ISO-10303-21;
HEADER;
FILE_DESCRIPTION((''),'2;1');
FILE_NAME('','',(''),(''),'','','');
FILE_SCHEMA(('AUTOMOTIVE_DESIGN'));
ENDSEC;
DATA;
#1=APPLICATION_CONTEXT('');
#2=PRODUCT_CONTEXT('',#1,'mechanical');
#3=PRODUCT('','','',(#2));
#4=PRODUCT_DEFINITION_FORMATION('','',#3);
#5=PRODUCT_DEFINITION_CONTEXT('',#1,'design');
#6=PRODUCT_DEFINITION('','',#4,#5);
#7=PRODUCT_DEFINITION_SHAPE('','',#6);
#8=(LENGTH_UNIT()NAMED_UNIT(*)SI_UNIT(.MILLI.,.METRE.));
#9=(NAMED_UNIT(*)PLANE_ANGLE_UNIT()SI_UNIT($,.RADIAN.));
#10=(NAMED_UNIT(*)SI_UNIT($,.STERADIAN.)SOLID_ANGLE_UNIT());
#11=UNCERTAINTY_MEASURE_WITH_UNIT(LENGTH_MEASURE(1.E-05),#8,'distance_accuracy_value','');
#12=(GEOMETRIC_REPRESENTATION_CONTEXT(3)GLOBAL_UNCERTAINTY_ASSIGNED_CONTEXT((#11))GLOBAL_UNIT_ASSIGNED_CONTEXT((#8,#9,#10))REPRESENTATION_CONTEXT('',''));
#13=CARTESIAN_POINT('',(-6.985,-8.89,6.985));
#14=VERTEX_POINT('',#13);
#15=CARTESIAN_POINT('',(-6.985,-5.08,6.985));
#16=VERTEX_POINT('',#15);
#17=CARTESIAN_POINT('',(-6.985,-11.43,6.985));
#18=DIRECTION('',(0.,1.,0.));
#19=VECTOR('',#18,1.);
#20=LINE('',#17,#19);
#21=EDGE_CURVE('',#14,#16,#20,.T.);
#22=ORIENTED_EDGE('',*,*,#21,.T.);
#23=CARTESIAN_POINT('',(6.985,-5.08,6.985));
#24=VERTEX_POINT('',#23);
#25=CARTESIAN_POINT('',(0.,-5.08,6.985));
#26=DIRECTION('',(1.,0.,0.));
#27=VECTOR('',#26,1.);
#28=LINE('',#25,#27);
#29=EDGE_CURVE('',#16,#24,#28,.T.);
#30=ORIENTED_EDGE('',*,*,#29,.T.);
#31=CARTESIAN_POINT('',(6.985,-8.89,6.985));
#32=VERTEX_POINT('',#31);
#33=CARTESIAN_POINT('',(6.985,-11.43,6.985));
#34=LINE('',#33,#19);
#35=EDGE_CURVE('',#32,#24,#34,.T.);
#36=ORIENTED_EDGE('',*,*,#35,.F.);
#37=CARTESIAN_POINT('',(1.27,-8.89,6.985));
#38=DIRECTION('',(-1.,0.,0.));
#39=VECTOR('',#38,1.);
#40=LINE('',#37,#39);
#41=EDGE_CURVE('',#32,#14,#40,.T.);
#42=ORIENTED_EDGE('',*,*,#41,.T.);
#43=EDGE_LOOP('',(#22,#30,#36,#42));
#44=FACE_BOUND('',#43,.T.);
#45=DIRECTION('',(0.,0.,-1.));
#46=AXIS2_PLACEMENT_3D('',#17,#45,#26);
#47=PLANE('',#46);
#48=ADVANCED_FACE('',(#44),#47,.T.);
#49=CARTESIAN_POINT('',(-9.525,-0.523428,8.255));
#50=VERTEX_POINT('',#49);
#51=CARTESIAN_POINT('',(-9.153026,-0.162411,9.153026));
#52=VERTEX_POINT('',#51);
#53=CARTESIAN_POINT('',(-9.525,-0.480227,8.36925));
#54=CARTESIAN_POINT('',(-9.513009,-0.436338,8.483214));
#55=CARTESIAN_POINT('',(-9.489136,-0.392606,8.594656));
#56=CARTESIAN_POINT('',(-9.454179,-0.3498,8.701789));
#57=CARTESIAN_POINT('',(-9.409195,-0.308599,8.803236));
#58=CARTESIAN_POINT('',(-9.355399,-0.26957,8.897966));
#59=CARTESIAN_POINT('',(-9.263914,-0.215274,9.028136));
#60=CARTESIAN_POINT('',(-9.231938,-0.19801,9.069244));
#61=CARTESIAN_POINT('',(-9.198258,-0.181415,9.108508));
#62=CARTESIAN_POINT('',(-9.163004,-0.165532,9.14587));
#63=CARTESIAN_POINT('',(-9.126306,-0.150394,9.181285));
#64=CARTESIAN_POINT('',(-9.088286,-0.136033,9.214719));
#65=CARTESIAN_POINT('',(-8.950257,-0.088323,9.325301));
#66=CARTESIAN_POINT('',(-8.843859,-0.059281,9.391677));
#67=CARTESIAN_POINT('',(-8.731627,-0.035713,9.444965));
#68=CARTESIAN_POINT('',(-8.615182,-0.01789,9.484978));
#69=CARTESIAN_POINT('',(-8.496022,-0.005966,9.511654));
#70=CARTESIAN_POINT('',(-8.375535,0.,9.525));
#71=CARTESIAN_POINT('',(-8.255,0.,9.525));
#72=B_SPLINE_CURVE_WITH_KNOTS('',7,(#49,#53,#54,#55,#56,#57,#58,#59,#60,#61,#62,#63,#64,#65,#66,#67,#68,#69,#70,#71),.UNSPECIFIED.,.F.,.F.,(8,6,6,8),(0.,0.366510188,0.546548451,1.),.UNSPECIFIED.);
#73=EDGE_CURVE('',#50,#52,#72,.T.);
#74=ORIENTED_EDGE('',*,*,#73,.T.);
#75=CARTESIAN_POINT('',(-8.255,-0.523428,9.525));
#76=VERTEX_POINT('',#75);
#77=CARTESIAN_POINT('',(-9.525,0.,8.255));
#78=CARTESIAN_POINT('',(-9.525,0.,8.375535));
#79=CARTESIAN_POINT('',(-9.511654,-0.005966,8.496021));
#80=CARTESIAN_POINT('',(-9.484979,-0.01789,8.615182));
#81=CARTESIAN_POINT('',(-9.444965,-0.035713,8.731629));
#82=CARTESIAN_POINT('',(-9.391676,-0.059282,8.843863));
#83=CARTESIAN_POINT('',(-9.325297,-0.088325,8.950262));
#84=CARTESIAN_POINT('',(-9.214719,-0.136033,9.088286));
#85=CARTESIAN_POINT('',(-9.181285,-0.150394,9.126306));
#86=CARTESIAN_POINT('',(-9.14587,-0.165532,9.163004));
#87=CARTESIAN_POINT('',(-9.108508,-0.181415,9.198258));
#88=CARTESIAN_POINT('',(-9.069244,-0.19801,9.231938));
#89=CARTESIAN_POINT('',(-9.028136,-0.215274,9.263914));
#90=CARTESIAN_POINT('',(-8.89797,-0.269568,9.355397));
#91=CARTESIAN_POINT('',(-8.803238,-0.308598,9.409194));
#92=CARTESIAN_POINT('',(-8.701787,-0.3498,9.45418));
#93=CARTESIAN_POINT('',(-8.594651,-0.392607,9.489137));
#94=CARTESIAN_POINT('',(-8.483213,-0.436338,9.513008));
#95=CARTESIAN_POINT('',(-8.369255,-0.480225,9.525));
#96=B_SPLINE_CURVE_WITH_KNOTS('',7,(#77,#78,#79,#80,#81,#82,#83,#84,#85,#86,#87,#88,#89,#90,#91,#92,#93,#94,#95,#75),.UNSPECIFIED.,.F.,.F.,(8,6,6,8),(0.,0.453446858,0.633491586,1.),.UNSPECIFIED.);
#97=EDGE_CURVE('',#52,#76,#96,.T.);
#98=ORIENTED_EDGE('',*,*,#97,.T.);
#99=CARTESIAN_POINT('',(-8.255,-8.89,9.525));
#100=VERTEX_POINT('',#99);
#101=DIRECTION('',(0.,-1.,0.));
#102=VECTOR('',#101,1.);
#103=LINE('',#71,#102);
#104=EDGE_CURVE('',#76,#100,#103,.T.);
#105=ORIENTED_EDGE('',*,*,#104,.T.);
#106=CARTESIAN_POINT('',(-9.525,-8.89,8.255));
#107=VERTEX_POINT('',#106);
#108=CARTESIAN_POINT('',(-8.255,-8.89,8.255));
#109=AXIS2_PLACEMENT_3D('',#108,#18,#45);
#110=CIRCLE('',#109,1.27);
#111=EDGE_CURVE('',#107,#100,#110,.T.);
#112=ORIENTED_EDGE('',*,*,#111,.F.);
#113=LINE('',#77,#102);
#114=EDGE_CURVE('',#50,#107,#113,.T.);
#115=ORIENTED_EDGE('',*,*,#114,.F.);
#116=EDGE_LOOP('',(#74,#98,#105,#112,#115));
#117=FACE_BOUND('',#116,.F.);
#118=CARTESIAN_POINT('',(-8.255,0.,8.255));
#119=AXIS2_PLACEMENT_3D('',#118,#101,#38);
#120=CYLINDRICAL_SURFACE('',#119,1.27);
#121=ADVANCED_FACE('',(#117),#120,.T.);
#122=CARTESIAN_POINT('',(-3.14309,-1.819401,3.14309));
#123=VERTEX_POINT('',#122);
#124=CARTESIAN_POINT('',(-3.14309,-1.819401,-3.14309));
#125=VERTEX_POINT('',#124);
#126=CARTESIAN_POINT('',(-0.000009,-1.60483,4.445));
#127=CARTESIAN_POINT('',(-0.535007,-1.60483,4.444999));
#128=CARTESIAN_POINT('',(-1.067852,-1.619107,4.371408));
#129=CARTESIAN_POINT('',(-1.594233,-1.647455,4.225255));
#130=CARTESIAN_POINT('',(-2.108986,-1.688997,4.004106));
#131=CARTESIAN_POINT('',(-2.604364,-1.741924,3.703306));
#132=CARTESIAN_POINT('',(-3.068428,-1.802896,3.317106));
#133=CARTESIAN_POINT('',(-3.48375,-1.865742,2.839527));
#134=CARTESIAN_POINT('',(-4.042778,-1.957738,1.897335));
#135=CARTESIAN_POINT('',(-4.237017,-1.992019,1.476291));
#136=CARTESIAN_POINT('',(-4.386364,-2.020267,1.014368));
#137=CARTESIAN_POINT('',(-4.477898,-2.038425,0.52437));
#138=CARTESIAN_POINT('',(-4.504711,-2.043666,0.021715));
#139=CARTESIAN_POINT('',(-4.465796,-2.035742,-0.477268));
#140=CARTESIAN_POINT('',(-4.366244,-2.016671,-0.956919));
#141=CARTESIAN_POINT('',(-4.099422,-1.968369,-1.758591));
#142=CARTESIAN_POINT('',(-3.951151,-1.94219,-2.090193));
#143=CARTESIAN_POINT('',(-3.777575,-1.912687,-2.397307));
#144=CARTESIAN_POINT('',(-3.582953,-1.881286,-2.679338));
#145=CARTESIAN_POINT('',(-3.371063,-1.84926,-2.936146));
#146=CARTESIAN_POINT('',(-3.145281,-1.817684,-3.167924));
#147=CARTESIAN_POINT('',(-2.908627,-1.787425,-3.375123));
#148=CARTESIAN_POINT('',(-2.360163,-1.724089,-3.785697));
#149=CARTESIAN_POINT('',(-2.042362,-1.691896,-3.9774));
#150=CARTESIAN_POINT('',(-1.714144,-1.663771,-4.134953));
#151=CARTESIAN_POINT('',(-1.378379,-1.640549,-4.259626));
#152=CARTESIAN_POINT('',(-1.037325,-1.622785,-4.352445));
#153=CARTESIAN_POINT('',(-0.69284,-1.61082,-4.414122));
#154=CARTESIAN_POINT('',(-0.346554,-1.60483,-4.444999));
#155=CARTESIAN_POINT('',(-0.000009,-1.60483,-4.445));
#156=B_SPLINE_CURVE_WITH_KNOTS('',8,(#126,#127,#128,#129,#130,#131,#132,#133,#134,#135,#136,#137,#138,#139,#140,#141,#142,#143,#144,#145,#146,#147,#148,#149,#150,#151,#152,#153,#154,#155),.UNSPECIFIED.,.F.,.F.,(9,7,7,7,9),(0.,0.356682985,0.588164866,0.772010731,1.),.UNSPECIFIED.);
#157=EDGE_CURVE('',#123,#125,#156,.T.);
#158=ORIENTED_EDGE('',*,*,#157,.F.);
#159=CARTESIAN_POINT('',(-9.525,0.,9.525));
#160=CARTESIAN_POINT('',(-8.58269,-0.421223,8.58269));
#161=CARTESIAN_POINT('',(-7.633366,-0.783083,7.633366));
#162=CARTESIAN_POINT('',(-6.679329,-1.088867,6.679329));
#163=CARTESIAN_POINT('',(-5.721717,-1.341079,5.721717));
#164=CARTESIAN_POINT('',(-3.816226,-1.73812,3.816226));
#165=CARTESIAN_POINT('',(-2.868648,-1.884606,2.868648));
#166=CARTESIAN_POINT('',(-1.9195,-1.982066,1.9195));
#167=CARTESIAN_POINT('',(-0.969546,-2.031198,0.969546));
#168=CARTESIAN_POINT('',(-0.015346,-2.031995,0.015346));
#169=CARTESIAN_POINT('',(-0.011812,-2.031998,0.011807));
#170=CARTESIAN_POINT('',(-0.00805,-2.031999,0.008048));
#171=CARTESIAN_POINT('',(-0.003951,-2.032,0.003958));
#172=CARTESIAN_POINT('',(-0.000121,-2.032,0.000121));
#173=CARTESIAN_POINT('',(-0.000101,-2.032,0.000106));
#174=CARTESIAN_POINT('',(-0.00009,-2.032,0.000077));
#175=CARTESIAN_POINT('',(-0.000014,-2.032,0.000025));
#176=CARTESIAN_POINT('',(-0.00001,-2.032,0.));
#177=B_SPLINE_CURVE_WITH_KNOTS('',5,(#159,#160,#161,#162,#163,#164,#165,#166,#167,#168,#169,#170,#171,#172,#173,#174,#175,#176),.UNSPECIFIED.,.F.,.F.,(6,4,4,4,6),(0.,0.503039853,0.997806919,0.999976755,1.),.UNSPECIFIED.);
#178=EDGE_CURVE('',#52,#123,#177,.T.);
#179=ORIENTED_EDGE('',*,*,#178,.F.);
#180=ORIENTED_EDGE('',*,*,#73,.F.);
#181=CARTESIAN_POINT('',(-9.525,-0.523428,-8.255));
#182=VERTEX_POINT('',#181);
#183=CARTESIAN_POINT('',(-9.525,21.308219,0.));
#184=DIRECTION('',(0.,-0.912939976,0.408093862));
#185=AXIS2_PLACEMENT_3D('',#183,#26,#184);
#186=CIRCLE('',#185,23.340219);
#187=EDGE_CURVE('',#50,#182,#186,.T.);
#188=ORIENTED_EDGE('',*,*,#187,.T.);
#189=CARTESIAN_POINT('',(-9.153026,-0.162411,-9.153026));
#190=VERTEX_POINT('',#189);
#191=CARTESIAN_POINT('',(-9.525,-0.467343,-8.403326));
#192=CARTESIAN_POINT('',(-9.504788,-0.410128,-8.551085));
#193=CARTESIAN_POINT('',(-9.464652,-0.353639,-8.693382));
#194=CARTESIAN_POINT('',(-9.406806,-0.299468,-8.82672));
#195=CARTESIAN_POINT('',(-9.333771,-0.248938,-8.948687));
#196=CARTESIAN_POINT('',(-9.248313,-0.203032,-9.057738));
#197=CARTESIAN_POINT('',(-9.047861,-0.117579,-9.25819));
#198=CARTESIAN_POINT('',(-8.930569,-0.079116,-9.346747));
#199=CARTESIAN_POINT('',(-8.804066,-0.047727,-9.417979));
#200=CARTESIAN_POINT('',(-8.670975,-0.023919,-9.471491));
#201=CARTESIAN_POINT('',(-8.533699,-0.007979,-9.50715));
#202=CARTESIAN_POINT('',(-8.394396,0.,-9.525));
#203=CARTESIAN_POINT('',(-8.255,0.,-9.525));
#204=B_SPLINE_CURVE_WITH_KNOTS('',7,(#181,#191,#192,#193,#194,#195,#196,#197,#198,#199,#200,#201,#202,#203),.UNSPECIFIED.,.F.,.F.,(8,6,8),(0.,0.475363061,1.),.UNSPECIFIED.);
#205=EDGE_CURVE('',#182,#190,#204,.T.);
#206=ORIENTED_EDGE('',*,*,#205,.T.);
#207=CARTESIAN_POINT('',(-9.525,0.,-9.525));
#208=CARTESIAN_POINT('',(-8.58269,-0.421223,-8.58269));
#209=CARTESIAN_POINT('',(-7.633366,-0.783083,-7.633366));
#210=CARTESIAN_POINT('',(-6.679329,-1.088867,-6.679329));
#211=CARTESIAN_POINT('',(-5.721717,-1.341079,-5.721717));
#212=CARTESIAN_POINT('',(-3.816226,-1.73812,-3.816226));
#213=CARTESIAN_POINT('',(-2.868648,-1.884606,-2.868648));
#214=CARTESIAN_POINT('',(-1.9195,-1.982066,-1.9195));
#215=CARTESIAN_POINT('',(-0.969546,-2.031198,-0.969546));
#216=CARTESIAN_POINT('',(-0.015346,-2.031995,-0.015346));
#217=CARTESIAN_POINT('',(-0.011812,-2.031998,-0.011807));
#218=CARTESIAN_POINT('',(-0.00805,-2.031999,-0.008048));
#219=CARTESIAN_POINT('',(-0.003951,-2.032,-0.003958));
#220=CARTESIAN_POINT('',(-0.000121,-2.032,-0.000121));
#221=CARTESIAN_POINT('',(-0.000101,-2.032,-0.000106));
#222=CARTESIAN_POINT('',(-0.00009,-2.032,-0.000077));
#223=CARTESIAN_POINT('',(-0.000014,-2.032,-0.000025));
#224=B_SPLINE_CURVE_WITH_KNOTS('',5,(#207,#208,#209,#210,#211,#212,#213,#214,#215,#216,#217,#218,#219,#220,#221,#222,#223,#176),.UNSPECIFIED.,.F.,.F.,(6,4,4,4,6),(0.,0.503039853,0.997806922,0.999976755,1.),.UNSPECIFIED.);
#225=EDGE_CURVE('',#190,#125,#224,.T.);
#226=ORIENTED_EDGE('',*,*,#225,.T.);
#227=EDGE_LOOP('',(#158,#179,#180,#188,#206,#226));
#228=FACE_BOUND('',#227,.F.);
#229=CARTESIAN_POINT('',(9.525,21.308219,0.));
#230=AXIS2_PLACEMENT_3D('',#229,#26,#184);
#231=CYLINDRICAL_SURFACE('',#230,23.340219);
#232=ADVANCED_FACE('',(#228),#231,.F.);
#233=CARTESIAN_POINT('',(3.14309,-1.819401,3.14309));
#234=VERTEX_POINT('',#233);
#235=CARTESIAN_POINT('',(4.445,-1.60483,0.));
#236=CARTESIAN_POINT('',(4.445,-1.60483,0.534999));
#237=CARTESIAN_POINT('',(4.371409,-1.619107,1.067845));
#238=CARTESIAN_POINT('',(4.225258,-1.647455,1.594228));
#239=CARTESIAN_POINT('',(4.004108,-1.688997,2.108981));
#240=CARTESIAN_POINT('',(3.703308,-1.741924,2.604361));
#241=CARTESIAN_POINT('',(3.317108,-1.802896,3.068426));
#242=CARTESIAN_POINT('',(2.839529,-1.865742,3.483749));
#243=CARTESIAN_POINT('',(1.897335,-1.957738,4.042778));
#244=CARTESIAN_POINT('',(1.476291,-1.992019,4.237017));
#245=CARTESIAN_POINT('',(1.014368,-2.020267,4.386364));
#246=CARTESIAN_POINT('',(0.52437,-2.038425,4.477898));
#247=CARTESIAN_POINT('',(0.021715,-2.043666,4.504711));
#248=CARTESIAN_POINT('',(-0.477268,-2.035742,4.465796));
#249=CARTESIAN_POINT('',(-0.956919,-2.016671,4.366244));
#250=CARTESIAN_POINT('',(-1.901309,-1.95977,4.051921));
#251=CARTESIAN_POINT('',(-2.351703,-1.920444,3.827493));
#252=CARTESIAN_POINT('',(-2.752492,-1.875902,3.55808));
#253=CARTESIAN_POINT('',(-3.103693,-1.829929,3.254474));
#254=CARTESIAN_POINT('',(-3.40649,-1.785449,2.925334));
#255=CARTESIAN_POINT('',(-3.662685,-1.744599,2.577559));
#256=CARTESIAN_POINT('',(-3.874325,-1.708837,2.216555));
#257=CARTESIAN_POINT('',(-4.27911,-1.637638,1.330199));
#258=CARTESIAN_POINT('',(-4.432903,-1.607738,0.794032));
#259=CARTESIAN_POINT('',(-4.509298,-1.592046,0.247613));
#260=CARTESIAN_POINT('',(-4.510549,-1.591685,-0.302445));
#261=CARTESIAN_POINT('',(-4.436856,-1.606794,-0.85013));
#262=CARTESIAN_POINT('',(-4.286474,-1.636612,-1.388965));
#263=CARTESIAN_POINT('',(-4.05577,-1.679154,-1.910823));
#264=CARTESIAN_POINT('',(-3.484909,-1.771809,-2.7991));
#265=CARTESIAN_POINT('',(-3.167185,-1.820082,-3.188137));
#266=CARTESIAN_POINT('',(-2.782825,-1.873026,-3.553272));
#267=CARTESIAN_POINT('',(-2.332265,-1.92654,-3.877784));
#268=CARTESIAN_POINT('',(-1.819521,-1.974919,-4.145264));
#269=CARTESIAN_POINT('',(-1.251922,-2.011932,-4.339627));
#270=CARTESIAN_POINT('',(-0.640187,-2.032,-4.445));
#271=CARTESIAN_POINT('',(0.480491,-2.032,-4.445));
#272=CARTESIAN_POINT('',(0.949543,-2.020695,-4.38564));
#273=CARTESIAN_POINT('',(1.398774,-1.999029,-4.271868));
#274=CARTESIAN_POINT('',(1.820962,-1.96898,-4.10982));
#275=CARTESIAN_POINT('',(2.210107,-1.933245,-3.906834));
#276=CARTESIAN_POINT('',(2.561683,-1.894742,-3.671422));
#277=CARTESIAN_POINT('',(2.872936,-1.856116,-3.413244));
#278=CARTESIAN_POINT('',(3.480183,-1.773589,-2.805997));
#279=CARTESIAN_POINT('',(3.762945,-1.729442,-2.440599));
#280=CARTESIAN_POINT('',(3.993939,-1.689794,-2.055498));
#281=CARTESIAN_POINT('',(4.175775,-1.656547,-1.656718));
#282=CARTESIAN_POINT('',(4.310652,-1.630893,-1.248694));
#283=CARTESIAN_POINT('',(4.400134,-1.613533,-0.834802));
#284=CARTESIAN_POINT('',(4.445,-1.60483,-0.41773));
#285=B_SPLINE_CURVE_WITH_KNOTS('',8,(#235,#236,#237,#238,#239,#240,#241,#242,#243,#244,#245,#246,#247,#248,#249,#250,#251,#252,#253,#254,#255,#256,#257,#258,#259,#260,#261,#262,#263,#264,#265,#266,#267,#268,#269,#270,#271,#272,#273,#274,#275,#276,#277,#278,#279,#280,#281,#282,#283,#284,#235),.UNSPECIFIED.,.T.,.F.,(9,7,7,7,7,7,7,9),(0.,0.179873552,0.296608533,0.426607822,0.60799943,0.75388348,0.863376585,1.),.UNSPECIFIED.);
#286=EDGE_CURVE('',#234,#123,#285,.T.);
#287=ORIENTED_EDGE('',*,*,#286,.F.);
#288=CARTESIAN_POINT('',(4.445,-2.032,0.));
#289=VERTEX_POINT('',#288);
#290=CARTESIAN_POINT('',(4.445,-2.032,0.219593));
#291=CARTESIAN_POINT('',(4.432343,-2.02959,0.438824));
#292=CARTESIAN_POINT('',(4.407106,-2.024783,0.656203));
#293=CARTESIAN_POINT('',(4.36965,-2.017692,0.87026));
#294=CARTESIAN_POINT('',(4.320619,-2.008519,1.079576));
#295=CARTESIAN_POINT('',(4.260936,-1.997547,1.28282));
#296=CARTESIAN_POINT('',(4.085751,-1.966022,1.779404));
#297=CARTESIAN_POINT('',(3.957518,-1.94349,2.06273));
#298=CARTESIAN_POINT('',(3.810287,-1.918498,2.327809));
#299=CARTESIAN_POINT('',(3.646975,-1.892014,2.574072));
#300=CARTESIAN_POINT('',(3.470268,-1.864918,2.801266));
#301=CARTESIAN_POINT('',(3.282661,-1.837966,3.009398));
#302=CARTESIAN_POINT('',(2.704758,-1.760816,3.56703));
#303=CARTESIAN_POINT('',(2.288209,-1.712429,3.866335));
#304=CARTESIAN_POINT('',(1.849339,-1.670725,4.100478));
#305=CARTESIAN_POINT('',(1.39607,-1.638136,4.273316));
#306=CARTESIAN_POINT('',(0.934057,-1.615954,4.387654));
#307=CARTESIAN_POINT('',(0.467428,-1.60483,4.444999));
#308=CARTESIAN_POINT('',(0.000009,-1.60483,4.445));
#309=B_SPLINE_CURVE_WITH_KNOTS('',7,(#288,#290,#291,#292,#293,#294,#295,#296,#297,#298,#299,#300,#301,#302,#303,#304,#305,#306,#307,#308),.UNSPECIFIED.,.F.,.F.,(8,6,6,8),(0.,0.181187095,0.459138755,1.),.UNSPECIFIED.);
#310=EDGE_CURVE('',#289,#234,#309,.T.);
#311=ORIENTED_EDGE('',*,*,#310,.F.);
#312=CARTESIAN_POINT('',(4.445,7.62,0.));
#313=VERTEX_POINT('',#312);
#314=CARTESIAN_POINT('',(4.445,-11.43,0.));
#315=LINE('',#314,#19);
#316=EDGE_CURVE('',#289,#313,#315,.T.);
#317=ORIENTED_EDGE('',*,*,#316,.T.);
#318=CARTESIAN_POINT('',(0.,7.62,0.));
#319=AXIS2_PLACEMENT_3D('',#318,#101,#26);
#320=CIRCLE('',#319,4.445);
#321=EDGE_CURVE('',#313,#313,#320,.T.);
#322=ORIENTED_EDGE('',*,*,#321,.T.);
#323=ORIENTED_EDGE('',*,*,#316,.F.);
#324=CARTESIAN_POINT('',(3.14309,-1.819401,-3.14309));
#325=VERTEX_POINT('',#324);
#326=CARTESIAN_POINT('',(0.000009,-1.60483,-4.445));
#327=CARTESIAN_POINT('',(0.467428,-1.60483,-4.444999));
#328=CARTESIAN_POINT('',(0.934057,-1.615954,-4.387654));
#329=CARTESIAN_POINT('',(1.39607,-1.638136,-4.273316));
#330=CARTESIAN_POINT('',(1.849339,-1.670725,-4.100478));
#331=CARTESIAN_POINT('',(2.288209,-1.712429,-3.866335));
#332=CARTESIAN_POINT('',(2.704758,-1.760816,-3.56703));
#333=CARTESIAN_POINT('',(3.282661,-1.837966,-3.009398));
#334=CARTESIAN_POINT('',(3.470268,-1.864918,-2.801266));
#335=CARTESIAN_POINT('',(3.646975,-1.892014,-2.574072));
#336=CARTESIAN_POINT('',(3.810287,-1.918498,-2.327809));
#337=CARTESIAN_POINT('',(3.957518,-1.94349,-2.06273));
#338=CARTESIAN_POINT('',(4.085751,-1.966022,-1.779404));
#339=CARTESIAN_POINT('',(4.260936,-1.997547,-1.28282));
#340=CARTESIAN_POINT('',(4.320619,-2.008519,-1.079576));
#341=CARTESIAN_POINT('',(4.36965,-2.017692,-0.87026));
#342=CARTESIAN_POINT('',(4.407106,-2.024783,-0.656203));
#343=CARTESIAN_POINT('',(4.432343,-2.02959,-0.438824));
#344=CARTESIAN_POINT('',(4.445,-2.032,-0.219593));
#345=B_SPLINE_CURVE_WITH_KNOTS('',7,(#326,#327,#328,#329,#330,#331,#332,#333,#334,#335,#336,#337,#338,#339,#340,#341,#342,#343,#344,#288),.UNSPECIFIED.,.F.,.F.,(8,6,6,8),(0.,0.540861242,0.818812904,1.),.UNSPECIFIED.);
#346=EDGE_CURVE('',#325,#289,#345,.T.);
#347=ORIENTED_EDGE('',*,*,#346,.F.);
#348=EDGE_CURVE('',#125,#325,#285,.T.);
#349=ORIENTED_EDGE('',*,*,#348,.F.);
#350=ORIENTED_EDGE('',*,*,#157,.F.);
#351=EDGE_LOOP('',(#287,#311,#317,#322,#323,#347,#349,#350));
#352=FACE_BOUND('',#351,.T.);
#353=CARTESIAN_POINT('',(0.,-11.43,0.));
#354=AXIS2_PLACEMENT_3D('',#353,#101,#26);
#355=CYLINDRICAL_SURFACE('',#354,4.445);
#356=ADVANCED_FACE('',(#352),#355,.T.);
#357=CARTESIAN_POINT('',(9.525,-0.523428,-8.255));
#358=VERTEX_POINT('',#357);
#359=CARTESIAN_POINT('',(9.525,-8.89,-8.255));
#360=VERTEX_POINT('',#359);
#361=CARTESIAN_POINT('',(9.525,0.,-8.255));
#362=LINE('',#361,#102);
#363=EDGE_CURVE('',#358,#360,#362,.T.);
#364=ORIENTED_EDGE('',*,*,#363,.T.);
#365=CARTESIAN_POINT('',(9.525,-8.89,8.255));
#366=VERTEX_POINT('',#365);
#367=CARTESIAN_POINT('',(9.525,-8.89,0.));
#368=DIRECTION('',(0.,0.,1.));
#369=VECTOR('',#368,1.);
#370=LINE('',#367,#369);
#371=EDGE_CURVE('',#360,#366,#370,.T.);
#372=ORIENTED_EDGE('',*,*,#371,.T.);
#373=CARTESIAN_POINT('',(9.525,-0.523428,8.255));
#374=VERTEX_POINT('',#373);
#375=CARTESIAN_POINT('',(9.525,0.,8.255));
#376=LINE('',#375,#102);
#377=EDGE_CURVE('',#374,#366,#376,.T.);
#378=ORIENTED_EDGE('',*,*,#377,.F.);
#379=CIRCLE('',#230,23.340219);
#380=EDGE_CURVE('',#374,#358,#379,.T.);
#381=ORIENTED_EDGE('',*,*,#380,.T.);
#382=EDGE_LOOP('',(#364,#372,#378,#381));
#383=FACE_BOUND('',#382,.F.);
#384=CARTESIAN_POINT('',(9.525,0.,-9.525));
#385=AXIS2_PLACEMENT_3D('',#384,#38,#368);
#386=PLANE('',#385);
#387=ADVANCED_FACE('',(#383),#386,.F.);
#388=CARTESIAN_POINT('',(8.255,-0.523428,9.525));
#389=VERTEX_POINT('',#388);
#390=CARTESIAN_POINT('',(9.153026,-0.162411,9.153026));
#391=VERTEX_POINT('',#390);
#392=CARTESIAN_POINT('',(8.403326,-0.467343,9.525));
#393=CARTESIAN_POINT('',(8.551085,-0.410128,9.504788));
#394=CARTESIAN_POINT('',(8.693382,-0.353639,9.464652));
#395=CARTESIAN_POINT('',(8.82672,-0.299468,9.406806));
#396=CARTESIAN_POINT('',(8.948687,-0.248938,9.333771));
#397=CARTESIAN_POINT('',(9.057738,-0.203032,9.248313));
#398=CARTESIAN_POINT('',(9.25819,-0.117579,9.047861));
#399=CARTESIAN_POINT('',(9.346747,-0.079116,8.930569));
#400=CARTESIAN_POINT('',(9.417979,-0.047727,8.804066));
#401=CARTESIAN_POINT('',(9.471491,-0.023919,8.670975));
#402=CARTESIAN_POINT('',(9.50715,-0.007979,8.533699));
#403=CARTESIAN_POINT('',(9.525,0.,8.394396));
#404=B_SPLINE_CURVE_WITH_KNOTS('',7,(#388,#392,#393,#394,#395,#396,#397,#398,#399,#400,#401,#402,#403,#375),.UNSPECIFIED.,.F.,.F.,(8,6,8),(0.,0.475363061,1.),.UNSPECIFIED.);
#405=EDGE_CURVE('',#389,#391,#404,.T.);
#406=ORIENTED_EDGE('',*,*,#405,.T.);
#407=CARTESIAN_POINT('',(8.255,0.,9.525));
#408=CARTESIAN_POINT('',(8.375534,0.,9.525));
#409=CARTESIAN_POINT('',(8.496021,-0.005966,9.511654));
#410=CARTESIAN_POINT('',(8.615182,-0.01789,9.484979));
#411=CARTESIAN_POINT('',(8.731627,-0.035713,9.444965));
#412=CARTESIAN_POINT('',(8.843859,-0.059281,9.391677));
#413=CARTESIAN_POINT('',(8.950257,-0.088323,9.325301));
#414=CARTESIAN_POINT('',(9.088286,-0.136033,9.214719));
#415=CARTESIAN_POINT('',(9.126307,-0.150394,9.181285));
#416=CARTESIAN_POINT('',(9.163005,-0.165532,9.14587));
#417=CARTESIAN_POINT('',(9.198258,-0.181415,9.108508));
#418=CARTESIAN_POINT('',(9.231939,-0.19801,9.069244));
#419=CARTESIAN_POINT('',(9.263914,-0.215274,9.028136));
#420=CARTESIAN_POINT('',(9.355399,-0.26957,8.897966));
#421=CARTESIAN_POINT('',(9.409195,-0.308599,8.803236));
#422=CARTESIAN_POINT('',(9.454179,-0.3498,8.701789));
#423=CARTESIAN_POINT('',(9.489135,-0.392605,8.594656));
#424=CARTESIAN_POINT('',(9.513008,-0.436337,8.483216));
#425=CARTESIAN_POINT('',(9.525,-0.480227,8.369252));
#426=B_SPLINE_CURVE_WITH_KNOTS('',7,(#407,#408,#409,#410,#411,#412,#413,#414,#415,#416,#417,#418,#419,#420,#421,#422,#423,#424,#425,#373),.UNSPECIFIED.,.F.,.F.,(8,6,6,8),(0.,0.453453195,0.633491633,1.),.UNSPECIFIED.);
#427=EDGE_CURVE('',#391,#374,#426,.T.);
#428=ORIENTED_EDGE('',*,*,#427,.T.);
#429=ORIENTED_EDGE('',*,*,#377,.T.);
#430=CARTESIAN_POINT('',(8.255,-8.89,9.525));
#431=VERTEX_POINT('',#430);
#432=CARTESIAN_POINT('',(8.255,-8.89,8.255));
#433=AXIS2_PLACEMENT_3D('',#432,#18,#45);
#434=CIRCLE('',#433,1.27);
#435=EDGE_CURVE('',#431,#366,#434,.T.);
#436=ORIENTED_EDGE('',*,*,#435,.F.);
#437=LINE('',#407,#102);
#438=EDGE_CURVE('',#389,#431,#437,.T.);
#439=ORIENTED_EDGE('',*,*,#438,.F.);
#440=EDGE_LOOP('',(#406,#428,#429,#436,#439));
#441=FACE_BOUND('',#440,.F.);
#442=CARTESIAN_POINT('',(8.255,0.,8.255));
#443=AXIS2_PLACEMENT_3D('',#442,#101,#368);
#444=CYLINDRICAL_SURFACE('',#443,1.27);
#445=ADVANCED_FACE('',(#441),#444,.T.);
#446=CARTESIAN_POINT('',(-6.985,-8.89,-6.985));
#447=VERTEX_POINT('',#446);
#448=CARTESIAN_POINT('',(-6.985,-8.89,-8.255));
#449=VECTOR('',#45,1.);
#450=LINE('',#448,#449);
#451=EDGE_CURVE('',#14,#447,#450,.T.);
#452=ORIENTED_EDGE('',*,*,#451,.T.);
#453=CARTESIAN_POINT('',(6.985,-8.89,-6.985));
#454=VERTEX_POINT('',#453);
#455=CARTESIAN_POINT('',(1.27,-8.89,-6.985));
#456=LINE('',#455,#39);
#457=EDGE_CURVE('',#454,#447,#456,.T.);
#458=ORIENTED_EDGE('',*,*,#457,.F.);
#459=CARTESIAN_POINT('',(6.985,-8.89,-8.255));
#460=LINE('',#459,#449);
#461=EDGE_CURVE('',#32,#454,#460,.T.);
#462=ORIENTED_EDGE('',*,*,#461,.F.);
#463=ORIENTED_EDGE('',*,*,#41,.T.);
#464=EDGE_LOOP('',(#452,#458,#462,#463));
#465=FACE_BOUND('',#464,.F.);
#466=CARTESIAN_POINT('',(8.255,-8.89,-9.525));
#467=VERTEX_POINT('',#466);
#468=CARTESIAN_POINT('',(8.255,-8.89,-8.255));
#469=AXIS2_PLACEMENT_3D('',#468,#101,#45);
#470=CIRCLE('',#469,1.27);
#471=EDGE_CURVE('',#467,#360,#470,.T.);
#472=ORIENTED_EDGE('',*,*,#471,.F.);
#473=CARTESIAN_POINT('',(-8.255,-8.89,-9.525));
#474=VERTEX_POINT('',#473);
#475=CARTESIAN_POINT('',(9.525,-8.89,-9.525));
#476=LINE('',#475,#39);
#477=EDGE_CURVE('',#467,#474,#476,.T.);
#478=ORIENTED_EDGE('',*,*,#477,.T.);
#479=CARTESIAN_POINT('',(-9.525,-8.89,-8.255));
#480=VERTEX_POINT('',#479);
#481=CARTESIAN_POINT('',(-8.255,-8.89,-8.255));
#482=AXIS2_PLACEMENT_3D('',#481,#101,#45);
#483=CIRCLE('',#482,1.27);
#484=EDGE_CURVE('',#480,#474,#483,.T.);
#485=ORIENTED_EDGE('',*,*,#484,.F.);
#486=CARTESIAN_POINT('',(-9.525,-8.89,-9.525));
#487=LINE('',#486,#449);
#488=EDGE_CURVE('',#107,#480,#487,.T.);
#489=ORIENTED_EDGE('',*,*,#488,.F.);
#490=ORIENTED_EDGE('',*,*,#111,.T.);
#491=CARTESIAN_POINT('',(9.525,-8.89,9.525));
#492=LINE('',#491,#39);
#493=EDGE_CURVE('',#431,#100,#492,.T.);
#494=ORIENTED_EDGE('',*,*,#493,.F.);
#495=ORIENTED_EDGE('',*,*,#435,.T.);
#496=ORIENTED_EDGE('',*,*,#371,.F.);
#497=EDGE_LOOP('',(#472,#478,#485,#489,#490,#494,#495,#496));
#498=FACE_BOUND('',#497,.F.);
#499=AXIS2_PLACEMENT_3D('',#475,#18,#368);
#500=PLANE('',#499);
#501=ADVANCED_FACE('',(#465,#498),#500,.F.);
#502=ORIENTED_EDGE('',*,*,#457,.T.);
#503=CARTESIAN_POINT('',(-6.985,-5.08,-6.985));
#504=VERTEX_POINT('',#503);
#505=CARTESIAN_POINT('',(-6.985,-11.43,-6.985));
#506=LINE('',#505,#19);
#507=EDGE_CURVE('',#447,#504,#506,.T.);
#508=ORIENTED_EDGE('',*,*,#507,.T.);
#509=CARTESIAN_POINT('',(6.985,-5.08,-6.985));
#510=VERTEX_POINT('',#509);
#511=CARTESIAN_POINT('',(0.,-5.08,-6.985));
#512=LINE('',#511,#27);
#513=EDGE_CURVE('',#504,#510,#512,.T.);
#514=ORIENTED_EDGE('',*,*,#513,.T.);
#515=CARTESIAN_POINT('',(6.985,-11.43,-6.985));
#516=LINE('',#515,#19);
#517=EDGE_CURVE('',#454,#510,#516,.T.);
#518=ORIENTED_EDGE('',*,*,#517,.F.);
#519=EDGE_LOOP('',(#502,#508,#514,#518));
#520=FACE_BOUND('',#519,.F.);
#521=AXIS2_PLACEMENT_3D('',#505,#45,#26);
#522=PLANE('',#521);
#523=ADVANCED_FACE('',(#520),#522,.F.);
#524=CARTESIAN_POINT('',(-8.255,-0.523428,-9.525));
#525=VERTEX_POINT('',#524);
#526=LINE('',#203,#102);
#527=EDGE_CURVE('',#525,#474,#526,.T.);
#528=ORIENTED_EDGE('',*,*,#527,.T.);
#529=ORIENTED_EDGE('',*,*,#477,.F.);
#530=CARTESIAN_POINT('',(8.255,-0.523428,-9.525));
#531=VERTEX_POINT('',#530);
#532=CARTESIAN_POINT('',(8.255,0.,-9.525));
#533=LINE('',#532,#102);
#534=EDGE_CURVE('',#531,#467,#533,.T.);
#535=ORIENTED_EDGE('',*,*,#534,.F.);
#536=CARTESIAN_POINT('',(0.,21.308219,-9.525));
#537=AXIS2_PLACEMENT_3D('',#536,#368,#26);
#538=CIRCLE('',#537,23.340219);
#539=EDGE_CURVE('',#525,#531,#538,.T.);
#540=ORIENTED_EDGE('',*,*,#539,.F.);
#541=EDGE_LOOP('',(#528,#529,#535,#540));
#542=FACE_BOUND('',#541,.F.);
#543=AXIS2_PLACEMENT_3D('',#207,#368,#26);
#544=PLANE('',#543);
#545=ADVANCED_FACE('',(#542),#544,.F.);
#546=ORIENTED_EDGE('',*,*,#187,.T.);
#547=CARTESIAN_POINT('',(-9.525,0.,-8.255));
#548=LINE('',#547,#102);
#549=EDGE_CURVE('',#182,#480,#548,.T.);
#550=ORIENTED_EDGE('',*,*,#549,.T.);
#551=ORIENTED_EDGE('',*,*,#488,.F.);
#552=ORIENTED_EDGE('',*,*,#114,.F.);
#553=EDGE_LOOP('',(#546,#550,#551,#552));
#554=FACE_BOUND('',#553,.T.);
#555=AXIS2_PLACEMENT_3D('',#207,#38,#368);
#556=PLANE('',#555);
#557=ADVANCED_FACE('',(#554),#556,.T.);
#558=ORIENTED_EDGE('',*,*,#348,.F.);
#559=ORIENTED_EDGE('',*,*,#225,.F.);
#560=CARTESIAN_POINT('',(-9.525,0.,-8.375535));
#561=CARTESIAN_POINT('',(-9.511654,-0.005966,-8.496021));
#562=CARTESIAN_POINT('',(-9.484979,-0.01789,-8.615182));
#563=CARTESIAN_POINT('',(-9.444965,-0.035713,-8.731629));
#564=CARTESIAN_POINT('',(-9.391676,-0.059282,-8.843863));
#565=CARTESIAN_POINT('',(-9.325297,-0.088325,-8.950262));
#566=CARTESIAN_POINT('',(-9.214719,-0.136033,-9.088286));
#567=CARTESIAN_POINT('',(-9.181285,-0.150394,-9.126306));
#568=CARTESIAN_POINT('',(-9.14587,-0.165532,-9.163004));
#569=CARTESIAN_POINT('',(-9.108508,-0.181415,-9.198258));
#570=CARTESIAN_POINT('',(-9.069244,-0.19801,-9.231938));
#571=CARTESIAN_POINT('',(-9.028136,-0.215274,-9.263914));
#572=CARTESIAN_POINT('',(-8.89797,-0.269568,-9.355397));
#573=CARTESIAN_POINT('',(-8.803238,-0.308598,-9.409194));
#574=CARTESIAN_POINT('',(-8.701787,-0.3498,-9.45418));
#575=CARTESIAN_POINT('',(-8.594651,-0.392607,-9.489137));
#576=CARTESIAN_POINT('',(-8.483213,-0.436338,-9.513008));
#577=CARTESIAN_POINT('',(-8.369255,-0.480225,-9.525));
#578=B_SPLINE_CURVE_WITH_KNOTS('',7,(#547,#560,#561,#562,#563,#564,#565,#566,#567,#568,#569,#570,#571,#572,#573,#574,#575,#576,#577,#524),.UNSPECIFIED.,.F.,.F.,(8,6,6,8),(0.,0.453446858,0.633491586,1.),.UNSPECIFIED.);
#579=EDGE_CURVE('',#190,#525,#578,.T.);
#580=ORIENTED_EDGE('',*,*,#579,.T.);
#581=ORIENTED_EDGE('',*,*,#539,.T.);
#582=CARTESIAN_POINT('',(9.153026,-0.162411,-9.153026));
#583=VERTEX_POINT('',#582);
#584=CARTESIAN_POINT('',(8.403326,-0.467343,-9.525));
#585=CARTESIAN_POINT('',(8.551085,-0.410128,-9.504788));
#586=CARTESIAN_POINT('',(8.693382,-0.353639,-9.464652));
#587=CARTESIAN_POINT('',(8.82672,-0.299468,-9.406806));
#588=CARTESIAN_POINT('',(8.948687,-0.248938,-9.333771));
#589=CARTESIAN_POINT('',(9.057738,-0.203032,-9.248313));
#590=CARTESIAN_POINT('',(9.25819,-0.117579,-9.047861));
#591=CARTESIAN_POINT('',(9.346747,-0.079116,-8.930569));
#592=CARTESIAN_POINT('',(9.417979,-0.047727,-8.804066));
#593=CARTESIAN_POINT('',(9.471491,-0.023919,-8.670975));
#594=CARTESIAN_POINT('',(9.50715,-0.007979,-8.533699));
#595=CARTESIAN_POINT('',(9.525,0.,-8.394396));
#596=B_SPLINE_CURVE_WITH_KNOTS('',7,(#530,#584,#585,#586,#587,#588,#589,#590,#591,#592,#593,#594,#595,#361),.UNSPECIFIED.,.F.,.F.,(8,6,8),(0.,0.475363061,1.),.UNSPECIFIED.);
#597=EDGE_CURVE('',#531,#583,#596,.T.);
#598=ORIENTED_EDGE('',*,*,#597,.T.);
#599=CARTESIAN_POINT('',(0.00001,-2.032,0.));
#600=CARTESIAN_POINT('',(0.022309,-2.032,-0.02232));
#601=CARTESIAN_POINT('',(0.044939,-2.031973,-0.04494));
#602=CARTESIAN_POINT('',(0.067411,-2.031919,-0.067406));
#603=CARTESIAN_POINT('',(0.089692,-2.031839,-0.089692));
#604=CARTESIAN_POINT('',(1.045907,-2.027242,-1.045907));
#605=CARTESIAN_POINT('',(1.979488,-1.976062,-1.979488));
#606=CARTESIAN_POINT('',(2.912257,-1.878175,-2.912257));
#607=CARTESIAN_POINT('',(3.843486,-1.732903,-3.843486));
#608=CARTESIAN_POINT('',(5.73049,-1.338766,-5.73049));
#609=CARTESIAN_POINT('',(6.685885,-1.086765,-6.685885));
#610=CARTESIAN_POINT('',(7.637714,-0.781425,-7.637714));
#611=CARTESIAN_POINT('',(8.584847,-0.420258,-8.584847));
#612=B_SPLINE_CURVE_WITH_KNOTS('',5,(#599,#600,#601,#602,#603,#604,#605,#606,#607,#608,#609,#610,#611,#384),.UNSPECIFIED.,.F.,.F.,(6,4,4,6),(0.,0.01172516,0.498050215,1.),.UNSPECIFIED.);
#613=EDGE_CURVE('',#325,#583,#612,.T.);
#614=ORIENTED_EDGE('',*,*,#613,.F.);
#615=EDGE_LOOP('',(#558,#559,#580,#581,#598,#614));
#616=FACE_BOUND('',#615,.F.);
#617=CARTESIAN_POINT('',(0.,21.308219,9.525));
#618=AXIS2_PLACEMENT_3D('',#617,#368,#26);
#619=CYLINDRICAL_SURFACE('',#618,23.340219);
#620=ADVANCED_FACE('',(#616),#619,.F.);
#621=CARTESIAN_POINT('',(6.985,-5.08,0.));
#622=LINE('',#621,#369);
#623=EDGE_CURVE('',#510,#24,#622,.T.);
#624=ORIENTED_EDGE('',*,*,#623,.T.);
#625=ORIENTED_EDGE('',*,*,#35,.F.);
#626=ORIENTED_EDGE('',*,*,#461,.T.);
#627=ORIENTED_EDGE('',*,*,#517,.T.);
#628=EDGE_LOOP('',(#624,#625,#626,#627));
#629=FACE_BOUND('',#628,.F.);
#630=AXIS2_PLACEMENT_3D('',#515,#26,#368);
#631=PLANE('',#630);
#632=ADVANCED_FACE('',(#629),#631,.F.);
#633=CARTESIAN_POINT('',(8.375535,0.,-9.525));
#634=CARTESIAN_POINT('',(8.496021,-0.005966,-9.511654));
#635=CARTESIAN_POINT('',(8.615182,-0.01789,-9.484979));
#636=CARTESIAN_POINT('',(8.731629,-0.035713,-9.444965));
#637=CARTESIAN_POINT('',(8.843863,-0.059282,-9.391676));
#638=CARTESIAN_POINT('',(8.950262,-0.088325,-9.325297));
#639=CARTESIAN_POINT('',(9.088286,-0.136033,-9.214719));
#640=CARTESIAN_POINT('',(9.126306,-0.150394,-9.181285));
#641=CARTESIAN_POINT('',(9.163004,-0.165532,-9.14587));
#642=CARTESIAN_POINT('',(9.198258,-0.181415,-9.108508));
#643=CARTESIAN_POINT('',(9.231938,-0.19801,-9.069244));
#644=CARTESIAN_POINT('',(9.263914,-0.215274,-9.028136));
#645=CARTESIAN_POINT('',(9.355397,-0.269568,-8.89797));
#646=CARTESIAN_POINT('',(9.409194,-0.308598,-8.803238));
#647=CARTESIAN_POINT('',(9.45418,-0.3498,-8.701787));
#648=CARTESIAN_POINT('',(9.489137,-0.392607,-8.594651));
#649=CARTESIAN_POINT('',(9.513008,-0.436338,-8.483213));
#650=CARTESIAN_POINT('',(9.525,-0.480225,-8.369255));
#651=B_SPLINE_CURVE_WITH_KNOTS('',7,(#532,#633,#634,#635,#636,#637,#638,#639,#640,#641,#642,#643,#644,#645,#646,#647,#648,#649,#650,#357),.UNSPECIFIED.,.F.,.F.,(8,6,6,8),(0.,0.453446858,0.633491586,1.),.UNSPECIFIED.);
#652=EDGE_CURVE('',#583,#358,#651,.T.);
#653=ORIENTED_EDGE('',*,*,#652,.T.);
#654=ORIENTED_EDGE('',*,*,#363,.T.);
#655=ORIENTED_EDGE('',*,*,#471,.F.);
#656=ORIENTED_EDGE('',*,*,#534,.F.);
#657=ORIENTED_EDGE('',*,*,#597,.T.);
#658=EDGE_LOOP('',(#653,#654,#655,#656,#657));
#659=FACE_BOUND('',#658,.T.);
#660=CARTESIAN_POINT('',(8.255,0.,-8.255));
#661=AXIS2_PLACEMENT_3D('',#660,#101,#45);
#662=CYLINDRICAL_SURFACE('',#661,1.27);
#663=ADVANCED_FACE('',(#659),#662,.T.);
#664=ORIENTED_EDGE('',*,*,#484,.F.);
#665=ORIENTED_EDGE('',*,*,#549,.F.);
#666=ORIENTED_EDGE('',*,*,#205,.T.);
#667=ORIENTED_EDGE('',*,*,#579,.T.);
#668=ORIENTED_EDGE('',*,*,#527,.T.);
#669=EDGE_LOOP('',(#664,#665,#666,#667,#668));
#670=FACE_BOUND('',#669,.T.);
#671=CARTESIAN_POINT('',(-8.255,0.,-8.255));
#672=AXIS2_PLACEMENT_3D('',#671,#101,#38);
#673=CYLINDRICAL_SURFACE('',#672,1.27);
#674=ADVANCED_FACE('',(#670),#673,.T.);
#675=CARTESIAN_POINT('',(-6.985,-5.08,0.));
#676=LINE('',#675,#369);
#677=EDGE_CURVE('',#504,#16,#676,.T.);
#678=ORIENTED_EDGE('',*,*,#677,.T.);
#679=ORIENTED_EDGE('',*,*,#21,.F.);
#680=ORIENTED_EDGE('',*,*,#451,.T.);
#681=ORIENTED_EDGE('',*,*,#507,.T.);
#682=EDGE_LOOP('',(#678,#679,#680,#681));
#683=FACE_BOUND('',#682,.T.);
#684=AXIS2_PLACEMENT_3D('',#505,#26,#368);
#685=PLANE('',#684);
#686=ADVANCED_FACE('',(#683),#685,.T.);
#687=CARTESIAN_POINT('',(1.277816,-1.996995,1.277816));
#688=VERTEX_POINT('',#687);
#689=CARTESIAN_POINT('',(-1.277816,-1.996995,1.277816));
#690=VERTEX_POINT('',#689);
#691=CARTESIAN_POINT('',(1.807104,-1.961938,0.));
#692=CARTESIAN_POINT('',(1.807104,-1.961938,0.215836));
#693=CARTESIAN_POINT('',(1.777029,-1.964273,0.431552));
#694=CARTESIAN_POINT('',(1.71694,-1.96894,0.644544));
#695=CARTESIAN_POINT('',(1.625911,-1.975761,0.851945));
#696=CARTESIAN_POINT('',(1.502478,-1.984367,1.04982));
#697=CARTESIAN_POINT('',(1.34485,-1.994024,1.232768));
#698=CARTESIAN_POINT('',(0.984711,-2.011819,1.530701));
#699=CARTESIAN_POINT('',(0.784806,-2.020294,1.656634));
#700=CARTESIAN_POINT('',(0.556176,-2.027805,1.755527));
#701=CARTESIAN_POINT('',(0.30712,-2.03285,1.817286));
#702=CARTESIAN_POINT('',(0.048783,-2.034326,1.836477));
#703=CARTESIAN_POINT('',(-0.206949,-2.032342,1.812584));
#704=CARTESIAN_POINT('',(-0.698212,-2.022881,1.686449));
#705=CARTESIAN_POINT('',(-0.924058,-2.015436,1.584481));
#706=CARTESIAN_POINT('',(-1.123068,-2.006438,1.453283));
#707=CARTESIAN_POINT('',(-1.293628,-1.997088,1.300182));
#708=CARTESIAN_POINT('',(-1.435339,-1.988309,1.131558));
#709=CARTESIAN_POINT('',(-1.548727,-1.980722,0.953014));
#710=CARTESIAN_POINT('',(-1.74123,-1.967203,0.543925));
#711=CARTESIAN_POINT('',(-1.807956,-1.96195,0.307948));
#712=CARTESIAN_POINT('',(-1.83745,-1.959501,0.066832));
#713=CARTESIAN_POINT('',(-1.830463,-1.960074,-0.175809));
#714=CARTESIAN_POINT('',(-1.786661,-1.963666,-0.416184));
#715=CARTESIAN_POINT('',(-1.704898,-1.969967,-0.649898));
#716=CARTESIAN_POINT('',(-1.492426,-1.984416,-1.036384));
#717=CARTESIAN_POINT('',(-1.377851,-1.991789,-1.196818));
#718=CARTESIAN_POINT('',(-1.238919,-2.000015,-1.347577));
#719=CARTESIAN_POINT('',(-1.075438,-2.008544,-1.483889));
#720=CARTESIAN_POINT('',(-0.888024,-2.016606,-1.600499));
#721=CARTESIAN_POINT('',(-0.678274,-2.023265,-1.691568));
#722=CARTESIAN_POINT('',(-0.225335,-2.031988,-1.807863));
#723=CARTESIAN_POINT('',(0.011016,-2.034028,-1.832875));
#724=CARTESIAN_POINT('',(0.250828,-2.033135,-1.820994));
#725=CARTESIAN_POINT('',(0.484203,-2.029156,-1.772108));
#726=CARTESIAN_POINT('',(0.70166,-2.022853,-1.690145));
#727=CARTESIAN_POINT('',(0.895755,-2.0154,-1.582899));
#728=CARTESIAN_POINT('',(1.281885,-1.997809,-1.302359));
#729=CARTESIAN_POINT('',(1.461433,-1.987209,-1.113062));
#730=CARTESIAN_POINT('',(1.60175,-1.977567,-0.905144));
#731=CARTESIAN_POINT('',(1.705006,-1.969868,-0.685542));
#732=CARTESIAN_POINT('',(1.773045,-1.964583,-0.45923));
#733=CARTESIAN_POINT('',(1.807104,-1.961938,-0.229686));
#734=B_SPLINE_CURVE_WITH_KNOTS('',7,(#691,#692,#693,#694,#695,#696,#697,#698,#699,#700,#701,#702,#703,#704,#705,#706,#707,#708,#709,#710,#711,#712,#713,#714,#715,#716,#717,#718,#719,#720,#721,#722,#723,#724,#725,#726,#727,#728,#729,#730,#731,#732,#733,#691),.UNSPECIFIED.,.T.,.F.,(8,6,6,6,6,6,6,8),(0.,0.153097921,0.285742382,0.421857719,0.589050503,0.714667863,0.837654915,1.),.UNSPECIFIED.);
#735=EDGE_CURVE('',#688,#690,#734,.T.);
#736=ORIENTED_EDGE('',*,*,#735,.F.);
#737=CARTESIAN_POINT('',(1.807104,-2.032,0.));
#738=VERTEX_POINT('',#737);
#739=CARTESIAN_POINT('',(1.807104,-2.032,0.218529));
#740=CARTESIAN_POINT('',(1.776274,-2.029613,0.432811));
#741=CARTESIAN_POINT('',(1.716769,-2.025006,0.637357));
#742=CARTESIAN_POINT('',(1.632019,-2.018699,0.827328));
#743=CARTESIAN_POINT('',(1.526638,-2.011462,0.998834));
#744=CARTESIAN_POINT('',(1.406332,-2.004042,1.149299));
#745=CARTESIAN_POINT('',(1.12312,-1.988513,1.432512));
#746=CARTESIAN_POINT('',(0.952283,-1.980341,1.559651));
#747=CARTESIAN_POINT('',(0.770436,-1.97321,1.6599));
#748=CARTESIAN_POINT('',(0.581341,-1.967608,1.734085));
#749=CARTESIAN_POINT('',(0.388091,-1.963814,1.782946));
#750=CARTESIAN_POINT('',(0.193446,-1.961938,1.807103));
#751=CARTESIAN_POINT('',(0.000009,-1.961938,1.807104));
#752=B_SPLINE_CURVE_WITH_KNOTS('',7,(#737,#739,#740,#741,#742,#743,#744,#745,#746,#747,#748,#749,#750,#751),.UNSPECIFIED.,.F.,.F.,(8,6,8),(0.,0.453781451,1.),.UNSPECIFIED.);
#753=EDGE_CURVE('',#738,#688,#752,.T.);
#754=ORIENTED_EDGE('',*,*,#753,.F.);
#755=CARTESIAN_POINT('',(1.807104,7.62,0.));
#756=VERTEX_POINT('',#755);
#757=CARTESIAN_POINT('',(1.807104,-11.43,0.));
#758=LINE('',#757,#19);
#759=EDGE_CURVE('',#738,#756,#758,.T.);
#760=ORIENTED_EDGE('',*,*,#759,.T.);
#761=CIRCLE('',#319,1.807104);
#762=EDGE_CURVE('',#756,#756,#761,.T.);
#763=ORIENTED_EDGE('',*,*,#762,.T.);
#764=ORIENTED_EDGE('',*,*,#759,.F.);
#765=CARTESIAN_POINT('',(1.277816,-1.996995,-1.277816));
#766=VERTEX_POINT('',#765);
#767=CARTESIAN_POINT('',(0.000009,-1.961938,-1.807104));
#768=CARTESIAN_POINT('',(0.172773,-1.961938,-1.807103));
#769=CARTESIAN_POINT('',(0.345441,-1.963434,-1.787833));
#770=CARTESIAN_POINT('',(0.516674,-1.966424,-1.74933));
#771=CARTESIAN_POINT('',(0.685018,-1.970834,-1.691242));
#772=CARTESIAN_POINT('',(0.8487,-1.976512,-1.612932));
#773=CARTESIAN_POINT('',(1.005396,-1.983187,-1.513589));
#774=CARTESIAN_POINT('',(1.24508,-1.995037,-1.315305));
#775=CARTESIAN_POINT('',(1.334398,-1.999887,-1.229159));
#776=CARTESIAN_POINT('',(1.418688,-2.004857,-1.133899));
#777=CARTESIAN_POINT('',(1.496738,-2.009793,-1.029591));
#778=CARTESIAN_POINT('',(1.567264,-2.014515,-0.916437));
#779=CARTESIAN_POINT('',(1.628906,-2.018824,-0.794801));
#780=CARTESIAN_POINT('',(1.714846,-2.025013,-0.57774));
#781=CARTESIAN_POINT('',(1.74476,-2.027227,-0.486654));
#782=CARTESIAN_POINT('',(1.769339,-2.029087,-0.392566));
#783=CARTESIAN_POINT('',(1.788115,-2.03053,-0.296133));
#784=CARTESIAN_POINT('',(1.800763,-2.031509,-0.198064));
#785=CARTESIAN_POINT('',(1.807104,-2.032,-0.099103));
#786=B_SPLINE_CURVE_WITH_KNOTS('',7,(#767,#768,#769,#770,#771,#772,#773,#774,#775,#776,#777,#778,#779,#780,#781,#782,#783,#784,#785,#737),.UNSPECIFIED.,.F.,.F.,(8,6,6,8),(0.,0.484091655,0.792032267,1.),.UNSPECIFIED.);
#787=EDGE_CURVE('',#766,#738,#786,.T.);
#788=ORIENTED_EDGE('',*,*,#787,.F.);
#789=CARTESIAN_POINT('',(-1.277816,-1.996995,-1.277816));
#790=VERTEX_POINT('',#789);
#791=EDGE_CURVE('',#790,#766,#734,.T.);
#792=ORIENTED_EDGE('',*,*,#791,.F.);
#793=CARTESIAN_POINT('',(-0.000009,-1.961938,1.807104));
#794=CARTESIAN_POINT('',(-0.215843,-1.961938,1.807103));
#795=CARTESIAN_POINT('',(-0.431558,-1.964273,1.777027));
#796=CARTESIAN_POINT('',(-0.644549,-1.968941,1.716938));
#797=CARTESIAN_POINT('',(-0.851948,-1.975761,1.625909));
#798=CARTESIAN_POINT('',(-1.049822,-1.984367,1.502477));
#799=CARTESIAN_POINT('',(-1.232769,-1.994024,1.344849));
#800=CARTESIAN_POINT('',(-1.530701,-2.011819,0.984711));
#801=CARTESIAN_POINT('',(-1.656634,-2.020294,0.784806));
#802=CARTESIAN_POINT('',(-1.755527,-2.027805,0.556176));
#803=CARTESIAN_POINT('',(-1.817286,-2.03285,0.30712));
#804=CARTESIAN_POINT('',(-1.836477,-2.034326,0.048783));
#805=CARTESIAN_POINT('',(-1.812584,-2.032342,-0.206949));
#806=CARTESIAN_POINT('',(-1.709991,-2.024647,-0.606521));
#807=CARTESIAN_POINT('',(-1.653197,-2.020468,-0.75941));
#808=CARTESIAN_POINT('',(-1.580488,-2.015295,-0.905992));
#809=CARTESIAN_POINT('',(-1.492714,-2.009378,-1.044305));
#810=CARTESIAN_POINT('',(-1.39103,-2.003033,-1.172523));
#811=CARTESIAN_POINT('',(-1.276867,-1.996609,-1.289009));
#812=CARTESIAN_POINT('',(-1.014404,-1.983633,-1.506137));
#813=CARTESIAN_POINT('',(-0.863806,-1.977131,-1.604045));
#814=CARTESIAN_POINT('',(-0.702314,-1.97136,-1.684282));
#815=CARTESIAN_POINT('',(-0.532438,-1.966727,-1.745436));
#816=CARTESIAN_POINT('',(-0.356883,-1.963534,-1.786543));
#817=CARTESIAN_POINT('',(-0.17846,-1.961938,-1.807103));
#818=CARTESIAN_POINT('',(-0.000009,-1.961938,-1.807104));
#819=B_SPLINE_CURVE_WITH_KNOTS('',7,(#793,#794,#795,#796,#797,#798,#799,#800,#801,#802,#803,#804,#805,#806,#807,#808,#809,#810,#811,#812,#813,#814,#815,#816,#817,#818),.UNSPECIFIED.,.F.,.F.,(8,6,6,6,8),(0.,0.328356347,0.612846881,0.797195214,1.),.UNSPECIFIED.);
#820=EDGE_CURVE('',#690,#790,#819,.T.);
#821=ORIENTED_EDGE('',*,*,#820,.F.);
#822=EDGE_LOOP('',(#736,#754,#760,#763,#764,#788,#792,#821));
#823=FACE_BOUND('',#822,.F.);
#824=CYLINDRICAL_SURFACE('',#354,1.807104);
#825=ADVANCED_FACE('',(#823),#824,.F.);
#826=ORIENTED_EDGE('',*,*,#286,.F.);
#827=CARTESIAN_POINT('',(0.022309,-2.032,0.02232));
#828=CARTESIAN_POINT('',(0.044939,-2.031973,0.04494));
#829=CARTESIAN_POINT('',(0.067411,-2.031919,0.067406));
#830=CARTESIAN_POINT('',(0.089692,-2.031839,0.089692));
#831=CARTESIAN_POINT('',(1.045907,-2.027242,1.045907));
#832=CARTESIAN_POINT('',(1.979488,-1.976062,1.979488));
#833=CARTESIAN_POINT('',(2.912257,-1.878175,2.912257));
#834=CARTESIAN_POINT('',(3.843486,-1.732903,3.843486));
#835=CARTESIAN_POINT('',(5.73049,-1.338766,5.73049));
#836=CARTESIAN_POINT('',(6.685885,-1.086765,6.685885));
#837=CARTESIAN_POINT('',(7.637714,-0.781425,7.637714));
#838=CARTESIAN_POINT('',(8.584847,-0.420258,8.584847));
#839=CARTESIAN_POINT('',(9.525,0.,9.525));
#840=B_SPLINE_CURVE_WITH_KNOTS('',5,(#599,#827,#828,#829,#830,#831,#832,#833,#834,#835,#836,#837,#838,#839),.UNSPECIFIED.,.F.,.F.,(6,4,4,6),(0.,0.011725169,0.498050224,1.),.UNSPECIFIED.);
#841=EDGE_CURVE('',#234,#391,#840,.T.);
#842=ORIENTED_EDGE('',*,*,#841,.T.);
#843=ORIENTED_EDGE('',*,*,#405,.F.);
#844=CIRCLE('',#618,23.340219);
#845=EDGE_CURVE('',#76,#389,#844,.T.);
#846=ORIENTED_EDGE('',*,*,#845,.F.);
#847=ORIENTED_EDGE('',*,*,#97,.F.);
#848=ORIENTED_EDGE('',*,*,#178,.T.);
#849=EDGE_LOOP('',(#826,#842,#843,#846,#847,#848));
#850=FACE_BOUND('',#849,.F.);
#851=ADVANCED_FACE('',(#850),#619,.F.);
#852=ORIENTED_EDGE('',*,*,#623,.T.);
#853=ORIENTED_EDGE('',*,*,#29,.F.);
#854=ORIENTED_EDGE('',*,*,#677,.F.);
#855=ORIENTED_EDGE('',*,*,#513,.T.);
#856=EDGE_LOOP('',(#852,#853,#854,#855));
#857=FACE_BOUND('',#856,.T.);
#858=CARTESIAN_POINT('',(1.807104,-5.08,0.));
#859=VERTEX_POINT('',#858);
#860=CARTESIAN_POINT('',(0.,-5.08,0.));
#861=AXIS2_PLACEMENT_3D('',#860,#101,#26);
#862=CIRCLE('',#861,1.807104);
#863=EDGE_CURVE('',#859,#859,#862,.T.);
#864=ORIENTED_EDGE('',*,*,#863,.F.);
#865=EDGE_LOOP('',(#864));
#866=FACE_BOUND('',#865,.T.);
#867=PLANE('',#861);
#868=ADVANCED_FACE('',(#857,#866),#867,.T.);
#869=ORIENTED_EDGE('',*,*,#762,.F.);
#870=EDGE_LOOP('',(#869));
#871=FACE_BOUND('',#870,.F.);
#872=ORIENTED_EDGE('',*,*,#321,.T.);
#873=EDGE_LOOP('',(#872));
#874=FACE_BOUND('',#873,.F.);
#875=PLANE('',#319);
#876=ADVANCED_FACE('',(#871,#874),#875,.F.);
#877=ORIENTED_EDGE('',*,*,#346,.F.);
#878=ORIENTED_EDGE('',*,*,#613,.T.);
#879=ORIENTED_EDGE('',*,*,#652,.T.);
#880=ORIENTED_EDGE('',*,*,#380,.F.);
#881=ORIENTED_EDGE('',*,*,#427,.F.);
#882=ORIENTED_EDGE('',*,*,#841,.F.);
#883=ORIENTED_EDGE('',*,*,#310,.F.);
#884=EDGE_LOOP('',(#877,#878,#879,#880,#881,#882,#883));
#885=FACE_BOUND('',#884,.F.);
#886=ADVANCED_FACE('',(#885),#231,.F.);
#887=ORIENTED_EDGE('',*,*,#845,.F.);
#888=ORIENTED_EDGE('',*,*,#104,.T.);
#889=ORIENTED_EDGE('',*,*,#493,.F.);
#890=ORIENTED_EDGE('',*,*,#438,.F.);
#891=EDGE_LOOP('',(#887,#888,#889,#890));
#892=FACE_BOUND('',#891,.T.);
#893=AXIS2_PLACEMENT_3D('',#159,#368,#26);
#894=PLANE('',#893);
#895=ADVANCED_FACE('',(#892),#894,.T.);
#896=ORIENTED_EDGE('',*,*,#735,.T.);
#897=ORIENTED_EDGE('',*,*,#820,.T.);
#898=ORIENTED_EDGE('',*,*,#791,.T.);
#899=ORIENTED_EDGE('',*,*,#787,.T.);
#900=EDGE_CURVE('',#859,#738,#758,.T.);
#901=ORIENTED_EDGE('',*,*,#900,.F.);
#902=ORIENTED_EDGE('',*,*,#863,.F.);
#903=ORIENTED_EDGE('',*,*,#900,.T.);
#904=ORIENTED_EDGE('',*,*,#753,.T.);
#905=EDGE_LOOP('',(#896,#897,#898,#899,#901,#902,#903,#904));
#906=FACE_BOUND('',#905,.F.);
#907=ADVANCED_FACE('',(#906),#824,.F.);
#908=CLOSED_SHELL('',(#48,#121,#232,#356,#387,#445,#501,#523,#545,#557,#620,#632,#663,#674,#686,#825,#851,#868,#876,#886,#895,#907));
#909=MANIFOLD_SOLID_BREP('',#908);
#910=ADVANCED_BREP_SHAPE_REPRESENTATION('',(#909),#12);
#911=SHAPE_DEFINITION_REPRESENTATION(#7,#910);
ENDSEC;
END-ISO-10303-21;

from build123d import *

# Parameters (mm, degrees)
F0_W      = 19.05
F0_H      = 19.05
F1_DEPTH  = 11.43
F3_DEPTH  = 19.051
F5_DEPTH  = 19.051
F6_R      = 4.445
F6_R_2    = 1.807104104
F7_DEPTH  = 19.05
F8_DEPTH  = 19.0510001
F9_W      = 2.54
F9_H      = 19.05
F10_DEPTH = 19.0510001
F11_W     = 13.97
F11_H     = 13.97
F11_R     = 4.445
F12_DEPTH = 6.35
F13_R     = 1.27


with BuildPart() as f1:
    # F0 (on Front) → F1 (new body)
    with BuildSketch(Plane.XZ):
        Rectangle(F0_W, F0_H)
    extrude(amount=F1_DEPTH)

    # F2 (on face) → F3 (cut, through all)
    with BuildSketch(Plane.YZ.offset(9.525)):
        with BuildLine():
            Line((0, -9.525), (0, 9.525))
            ThreePointArc((0, 9.525), (-2.032, 0), (0, -9.525))
        make_face()
    extrude(amount=-F3_DEPTH, mode=Mode.SUBTRACT)

    # F4 (on face) → F5 (cut, through all)
    with BuildSketch(Plane.XY.offset(9.525)):
        with BuildLine():
            ThreePointArc((9.525, 0), (19.5841950931, 8.6107735797), (23.34021875, 21.30821875))
            ThreePointArc((23.34021875, 21.30821875), (-12.6974451703, 40.8924138431), (-9.525, 0))
            Line((-9.525, 0), (9.525, 0))
        make_face()
        with BuildLine():
            Line((9.525, 0), (-9.525, 0))
            ThreePointArc((-9.525, 0), (0, -2.032), (9.525, 0))
        make_face()
    extrude(amount=-F5_DEPTH, mode=Mode.SUBTRACT)

    # F6 (on face) → F7 (join)
    with BuildSketch(Plane.XZ.offset(11.43)):
        Circle(F6_R)
        Circle(F6_R_2, mode=Mode.SUBTRACT)
    extrude(amount=-F7_DEPTH)

    # F6 (on face) → F8 (cut, through all)
    with BuildSketch(Plane.XZ.offset(11.43)):
        Circle(F6_R_2)
    extrude(amount=-F8_DEPTH, mode=Mode.SUBTRACT)

    # F9 (on face) → F10 (cut, through all)
    with BuildSketch(Plane.YZ.offset(9.525)):
        with Locations((-10.16, 0)):
            Rectangle(F9_W, F9_H)
    extrude(amount=-F10_DEPTH, mode=Mode.SUBTRACT)

    # F11 (on face) + F6 (on face) → F12 (cut)
    with BuildSketch(Plane.XZ.offset(11.43)):
        Rectangle(F11_W, F11_H)
        Circle(F11_R, mode=Mode.SUBTRACT)
    with BuildSketch(Plane.XZ.offset(11.43)):
        Circle(F6_R)
        Circle(F6_R_2, mode=Mode.SUBTRACT)
    extrude(amount=-F12_DEPTH, mode=Mode.SUBTRACT)

    # F13
    f13_edges = [f1.edges().sort_by_distance(p)[0] for p in [
        (-9.525, -4.445, -9.525),
        (-9.525, -4.445, 9.525),
        (9.525, -4.445, 9.525),
        (9.525, -4.445, -9.525),
    ]]
    fillet(f13_edges, radius=F13_R)


solid = f1.part
